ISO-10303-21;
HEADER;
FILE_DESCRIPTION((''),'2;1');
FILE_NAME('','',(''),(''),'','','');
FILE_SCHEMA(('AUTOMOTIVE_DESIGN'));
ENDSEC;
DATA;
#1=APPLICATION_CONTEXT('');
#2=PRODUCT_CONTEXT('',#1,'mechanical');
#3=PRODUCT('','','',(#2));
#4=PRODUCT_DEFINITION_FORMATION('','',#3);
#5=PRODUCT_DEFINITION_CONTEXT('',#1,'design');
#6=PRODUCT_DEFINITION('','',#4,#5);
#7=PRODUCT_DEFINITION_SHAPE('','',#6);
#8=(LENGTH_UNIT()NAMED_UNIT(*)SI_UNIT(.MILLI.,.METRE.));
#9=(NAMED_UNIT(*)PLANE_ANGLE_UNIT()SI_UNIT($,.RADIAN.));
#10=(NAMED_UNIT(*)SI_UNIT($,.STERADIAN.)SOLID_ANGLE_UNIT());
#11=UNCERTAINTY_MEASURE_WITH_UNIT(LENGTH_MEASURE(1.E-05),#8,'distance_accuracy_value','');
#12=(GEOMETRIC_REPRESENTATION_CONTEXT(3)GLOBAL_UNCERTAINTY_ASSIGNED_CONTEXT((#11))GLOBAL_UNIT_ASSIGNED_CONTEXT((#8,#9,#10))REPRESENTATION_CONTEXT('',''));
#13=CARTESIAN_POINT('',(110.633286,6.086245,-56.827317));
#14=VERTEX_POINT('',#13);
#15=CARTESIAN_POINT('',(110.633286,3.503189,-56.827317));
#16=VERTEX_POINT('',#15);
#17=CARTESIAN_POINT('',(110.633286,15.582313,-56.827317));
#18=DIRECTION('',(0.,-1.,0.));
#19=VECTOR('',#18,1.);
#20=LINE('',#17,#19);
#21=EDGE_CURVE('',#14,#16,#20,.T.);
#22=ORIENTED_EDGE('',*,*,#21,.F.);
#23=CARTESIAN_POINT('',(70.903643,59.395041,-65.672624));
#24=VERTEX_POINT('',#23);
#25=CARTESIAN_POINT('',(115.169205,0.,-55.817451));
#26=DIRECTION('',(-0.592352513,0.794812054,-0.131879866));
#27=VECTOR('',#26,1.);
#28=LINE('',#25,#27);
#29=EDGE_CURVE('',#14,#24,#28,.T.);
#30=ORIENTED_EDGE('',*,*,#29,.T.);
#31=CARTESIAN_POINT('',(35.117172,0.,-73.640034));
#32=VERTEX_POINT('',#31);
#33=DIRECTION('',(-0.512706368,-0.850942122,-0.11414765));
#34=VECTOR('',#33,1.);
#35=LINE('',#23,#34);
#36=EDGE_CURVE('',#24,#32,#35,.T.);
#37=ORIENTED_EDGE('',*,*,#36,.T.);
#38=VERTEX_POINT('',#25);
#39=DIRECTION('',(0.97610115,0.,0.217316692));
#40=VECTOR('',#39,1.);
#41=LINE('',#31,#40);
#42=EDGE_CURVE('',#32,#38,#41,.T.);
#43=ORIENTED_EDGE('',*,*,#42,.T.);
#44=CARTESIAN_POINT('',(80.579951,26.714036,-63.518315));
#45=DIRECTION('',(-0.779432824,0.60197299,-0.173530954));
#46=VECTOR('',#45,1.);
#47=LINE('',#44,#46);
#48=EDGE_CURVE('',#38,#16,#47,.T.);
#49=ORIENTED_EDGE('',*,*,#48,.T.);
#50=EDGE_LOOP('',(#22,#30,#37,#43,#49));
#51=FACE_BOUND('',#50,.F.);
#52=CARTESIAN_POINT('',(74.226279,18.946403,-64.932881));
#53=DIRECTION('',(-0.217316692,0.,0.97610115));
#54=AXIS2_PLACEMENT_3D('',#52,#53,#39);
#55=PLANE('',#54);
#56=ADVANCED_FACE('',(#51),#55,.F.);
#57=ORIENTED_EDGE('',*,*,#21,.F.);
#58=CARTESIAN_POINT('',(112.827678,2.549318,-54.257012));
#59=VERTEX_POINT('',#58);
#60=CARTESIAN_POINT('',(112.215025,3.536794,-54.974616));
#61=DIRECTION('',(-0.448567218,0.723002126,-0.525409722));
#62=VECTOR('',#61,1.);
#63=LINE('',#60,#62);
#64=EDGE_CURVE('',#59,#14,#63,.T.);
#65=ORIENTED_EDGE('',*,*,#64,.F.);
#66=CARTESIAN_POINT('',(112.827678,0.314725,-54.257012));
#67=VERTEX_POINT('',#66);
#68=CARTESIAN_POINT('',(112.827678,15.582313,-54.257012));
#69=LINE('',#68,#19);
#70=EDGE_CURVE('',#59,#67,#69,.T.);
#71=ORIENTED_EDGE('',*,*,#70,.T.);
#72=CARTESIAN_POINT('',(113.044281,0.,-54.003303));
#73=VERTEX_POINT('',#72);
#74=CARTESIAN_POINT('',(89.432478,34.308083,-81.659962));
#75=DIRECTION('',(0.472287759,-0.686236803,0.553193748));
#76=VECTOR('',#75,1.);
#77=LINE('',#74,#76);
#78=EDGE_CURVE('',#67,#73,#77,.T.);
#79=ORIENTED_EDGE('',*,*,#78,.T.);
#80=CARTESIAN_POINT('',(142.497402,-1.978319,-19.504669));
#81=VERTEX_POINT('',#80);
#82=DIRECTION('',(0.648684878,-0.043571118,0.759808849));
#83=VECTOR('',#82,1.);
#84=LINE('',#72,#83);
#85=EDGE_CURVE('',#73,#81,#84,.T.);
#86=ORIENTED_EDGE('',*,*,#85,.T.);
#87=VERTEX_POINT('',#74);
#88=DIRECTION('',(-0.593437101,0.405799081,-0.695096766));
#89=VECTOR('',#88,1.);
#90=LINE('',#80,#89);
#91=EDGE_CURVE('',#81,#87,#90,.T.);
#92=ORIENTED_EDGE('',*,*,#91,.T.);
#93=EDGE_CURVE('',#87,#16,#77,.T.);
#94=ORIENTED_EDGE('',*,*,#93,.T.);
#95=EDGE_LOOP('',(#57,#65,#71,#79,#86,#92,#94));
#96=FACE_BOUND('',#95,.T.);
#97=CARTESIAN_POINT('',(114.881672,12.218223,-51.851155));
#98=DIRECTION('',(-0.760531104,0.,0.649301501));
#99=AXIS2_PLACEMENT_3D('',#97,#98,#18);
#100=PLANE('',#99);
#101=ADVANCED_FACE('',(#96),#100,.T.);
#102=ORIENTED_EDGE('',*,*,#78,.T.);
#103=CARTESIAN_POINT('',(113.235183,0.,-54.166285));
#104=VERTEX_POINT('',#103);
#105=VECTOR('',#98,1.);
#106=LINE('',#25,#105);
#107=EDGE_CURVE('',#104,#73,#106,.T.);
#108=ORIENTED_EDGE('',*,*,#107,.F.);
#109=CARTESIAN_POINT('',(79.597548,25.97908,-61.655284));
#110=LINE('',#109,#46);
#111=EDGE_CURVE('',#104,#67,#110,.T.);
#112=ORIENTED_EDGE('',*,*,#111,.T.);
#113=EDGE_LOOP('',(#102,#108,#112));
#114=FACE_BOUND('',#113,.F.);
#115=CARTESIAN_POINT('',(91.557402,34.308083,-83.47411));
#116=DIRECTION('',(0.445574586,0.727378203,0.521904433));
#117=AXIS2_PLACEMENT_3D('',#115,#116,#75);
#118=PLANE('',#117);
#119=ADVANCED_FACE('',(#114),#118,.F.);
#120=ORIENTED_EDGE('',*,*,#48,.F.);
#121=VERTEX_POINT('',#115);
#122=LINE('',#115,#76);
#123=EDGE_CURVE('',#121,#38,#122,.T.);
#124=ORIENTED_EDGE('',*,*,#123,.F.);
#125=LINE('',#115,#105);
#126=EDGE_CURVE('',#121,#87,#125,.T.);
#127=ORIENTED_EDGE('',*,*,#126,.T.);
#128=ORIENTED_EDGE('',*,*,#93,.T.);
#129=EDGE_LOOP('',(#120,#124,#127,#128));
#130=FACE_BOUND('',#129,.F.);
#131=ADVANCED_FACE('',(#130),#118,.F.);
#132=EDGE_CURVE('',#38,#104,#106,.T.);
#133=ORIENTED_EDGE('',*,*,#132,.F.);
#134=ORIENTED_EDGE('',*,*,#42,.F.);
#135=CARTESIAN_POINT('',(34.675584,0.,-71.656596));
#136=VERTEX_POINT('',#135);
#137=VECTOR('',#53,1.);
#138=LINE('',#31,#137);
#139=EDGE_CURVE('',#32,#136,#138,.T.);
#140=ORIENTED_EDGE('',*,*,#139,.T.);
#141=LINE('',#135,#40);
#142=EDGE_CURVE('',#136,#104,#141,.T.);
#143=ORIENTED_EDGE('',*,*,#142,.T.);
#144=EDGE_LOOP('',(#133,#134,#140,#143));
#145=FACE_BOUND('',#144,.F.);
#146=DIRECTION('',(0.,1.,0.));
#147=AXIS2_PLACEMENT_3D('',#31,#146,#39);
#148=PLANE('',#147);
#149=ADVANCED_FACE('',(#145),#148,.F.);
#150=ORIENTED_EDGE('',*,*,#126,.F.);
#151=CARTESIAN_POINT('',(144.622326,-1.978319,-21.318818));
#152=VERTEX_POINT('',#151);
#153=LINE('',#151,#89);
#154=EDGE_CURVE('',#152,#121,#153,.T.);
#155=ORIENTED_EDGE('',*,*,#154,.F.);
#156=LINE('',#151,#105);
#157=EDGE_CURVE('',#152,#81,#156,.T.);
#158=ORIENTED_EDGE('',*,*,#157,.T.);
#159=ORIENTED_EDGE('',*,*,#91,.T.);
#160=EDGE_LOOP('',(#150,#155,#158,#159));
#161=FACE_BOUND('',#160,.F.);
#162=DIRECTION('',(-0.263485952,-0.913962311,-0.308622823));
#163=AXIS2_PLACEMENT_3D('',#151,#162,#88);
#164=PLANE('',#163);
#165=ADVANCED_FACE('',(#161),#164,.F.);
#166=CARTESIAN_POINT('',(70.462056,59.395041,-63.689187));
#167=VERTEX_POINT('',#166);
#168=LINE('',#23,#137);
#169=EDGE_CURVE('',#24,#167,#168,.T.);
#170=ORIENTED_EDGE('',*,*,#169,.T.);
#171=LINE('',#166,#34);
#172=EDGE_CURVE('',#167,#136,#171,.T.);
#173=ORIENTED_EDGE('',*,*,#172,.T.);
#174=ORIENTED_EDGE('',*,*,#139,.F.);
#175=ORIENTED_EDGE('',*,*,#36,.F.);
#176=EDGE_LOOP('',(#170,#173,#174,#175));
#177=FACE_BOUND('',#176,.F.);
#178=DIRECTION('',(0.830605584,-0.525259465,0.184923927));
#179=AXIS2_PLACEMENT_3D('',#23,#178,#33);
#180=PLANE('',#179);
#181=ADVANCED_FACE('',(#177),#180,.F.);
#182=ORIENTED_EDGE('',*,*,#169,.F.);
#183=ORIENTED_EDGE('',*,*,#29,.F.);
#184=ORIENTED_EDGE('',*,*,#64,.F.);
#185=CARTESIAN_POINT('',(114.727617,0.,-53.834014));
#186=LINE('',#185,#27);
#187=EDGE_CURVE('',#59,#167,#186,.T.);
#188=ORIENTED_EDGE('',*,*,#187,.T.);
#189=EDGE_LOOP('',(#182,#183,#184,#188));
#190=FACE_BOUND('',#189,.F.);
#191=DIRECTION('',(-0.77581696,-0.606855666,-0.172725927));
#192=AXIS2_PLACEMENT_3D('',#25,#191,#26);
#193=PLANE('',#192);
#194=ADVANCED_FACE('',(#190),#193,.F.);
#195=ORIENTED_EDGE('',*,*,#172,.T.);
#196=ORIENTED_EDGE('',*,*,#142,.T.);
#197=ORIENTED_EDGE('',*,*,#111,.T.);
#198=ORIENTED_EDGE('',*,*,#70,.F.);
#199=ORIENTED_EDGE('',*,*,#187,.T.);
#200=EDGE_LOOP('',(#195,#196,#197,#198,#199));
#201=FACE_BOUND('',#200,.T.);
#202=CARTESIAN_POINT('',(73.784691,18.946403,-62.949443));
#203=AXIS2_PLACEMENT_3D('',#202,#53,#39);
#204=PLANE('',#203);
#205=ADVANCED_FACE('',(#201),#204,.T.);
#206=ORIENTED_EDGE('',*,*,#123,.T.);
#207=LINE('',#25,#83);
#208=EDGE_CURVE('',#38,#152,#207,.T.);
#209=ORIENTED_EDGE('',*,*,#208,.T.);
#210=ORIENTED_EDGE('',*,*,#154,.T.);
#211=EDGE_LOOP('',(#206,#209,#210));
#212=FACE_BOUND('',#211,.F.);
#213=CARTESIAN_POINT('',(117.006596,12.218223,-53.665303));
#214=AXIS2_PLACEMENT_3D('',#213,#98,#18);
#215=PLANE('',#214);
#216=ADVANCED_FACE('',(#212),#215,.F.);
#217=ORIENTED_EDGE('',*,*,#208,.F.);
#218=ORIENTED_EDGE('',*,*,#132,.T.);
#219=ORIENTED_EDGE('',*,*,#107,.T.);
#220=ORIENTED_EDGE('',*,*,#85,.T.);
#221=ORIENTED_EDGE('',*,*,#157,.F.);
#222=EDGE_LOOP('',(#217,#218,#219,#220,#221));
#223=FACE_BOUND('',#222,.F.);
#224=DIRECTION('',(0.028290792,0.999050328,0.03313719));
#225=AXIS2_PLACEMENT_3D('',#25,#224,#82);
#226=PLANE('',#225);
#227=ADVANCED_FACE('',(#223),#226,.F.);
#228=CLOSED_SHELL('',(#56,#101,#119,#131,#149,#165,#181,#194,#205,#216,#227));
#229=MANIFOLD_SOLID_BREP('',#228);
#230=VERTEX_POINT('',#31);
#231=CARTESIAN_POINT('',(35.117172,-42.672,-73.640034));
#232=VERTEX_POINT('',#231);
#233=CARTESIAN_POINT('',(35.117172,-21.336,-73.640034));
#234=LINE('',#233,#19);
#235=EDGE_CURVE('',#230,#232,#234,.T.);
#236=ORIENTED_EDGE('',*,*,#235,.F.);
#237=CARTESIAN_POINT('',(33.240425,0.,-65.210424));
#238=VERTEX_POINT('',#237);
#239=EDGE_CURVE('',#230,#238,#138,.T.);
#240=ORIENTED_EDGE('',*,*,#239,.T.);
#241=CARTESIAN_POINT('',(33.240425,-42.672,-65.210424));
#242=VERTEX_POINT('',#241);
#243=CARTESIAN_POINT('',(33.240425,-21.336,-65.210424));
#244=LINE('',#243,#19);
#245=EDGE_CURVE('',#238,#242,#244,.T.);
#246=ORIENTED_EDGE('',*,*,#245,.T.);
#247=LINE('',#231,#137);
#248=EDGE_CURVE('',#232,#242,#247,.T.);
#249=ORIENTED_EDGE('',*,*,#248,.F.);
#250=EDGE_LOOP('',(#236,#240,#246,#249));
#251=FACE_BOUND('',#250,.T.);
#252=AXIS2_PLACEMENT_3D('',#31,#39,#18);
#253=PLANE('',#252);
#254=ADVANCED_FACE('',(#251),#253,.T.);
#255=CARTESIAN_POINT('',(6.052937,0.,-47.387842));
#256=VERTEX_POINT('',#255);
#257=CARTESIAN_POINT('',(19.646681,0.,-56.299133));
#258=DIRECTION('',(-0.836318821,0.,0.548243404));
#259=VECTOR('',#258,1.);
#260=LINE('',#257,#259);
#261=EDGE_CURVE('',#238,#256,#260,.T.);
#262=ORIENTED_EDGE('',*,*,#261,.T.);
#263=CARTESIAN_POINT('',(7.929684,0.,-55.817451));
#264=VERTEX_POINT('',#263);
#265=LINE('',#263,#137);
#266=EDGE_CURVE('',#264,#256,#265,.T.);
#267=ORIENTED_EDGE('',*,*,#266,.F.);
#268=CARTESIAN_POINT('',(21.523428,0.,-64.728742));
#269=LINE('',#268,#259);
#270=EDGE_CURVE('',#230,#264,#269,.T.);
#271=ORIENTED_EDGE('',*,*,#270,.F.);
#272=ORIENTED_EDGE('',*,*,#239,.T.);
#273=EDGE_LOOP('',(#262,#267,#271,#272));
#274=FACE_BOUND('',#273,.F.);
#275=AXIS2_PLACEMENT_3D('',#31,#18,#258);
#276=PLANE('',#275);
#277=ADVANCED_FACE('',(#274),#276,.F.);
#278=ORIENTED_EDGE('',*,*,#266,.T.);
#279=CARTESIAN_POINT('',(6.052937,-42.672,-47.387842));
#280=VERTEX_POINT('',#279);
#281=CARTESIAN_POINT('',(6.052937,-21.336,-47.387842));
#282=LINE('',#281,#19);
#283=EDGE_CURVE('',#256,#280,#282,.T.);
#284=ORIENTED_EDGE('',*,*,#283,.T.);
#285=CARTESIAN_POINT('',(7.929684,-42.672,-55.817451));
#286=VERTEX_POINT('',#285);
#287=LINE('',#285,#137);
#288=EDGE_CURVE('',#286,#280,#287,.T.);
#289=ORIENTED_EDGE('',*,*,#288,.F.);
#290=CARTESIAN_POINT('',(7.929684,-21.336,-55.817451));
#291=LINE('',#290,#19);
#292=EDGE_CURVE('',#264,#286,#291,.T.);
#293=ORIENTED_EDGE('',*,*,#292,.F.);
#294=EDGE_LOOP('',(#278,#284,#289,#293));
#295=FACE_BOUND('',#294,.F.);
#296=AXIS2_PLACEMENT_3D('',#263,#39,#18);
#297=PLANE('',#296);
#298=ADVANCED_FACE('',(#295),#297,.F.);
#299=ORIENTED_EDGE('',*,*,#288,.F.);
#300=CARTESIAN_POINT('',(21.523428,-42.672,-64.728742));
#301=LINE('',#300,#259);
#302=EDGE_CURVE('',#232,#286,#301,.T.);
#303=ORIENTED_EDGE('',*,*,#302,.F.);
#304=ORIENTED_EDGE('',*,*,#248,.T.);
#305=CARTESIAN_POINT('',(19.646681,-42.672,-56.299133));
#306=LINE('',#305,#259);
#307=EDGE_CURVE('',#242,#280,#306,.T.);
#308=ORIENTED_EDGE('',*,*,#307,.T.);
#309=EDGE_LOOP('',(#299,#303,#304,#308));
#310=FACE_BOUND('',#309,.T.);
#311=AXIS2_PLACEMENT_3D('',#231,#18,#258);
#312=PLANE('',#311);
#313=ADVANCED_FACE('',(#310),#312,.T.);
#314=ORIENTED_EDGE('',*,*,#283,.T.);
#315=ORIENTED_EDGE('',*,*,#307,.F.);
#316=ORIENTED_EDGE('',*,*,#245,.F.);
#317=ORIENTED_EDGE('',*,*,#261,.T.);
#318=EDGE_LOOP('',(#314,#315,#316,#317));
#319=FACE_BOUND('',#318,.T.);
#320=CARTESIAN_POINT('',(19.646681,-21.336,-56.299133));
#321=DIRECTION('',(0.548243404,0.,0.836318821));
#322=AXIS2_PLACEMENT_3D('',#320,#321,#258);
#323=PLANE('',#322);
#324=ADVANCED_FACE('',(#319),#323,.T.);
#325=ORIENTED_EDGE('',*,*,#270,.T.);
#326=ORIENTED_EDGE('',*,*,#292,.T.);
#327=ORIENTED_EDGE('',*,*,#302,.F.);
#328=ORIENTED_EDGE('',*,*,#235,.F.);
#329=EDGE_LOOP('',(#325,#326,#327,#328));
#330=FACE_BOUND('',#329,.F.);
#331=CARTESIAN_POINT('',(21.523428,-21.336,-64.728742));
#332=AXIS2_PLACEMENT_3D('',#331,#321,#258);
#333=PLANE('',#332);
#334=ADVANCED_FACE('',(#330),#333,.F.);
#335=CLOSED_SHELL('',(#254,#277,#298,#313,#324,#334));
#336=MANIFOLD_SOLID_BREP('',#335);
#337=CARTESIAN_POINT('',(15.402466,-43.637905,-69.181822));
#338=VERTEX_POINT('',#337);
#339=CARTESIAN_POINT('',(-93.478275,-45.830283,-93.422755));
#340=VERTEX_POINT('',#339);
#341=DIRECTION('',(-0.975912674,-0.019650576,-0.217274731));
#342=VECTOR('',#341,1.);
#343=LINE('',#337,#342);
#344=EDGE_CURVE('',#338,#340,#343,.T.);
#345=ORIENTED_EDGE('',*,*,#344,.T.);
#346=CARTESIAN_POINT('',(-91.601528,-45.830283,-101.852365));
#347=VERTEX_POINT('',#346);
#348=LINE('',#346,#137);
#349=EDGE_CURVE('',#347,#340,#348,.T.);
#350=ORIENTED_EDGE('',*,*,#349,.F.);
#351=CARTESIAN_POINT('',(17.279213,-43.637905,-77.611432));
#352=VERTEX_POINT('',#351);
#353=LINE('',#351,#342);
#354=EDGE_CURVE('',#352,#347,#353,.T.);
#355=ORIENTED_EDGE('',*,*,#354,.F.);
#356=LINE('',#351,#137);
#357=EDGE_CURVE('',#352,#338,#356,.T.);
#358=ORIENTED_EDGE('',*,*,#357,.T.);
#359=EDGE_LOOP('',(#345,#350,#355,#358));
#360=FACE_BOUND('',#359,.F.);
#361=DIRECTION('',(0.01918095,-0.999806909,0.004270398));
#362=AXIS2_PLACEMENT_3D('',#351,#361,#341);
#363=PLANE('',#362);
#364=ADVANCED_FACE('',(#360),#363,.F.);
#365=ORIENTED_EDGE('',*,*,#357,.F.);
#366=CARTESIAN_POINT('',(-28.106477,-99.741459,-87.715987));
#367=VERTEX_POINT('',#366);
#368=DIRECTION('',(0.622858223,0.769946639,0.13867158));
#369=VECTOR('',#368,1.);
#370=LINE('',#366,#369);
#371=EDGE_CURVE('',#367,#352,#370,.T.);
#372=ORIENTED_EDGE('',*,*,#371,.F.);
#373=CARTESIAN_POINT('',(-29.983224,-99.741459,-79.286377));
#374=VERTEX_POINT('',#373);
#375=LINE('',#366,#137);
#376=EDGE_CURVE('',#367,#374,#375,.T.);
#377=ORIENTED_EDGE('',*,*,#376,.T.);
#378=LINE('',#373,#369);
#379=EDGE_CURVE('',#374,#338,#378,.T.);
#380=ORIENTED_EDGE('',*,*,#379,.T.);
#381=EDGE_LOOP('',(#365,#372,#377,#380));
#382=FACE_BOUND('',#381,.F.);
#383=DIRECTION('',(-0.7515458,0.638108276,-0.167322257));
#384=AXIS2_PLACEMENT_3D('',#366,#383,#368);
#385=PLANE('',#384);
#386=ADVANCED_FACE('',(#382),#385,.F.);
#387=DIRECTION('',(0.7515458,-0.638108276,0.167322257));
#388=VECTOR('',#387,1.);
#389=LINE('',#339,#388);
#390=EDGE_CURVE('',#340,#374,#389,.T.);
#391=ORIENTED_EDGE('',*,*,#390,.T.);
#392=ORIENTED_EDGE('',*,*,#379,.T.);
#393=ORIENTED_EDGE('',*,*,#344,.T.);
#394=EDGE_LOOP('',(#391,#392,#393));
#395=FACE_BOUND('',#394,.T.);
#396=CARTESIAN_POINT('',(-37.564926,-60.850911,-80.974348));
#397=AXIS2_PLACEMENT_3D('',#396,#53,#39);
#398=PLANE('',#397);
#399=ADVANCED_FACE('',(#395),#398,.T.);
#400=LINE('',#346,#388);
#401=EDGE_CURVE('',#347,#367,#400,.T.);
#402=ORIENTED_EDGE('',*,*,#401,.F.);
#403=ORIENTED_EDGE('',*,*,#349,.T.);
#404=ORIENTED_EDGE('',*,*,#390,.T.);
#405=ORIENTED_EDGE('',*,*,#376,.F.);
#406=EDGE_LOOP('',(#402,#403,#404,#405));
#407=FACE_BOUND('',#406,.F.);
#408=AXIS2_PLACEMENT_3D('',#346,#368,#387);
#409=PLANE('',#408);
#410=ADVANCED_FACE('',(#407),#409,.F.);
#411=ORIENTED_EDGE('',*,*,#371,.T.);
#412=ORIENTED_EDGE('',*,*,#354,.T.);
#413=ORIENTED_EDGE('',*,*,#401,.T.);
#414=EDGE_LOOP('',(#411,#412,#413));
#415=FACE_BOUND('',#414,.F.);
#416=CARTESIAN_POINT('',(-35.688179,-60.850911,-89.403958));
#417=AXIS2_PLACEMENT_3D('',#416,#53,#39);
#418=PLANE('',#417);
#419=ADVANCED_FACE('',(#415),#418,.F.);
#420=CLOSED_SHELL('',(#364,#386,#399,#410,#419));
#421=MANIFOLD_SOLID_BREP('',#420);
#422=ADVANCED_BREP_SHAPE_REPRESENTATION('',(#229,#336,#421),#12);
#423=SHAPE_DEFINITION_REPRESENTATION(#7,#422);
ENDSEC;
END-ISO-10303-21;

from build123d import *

# Parameters (mm, degrees)
F1_E6_W  = 32.5085211131
F1_E6_H  = 42.672
F3_DEPTH = 8.636
F5_DEPTH = 2.032
F7_DEPTH = 2.794


with BuildPart() as f3:
    # F2 (on face) + F1_E6 (on explicit) → F3 (new body)
    with BuildSketch(Plane(origin=(17.2792129444, 0, -77.6114316477), x_dir=(0.9761011501, 0, 0.2173166925), z_dir=(-0.2173166925, 0, 0.9761011501))):
        Polygon((0, -43.6379054688), (-111.5465760231, -45.830283314), (-46.496912837, -99.7414588928), align=None)
    with BuildSketch(Plane(origin=(35.1171717048, 0, -73.6400336027), x_dir=(-0.8363188208, 0, 0.548243404), z_dir=(0.548243404, 0, 0.8363188208))):
        with Locations((16.2542605566, 21.336)):
            Rectangle(F1_E6_W, F1_E6_H)
    extrude(amount=F3_DEPTH, dir=(-0.2173166925, 0, 0.9761011501))


with BuildPart() as f5:
    # F4 (on face) → F5 (new body)
    with BuildSketch(Plane(origin=(17.2792129444, 0, -77.6114316477), x_dir=(0.9761011501, 0, 0.2173166925), z_dir=(-0.2173166925, 0, 0.9761011501))):
        Polygon((54.9373701215, 59.3950413167), (18.2747031485, 0), (100.2867293219, 0), align=None)
    extrude(amount=F5_DEPTH)

    # F6 (on face) → F7 (join)
    with BuildSketch(Plane(origin=(94.1781769889, 0, -80.4043797496), x_dir=(0, -1, 0), z_dir=(-0.7605311042, 0, 0.6493015013))):
        Polygon((1.9783186726, 77.6898695076), (-34.3080833554, -4.0362984873), (0, 32.3286296737), align=None)
    extrude(amount=F7_DEPTH)


solid = Compound([f3.part, f5.part])
